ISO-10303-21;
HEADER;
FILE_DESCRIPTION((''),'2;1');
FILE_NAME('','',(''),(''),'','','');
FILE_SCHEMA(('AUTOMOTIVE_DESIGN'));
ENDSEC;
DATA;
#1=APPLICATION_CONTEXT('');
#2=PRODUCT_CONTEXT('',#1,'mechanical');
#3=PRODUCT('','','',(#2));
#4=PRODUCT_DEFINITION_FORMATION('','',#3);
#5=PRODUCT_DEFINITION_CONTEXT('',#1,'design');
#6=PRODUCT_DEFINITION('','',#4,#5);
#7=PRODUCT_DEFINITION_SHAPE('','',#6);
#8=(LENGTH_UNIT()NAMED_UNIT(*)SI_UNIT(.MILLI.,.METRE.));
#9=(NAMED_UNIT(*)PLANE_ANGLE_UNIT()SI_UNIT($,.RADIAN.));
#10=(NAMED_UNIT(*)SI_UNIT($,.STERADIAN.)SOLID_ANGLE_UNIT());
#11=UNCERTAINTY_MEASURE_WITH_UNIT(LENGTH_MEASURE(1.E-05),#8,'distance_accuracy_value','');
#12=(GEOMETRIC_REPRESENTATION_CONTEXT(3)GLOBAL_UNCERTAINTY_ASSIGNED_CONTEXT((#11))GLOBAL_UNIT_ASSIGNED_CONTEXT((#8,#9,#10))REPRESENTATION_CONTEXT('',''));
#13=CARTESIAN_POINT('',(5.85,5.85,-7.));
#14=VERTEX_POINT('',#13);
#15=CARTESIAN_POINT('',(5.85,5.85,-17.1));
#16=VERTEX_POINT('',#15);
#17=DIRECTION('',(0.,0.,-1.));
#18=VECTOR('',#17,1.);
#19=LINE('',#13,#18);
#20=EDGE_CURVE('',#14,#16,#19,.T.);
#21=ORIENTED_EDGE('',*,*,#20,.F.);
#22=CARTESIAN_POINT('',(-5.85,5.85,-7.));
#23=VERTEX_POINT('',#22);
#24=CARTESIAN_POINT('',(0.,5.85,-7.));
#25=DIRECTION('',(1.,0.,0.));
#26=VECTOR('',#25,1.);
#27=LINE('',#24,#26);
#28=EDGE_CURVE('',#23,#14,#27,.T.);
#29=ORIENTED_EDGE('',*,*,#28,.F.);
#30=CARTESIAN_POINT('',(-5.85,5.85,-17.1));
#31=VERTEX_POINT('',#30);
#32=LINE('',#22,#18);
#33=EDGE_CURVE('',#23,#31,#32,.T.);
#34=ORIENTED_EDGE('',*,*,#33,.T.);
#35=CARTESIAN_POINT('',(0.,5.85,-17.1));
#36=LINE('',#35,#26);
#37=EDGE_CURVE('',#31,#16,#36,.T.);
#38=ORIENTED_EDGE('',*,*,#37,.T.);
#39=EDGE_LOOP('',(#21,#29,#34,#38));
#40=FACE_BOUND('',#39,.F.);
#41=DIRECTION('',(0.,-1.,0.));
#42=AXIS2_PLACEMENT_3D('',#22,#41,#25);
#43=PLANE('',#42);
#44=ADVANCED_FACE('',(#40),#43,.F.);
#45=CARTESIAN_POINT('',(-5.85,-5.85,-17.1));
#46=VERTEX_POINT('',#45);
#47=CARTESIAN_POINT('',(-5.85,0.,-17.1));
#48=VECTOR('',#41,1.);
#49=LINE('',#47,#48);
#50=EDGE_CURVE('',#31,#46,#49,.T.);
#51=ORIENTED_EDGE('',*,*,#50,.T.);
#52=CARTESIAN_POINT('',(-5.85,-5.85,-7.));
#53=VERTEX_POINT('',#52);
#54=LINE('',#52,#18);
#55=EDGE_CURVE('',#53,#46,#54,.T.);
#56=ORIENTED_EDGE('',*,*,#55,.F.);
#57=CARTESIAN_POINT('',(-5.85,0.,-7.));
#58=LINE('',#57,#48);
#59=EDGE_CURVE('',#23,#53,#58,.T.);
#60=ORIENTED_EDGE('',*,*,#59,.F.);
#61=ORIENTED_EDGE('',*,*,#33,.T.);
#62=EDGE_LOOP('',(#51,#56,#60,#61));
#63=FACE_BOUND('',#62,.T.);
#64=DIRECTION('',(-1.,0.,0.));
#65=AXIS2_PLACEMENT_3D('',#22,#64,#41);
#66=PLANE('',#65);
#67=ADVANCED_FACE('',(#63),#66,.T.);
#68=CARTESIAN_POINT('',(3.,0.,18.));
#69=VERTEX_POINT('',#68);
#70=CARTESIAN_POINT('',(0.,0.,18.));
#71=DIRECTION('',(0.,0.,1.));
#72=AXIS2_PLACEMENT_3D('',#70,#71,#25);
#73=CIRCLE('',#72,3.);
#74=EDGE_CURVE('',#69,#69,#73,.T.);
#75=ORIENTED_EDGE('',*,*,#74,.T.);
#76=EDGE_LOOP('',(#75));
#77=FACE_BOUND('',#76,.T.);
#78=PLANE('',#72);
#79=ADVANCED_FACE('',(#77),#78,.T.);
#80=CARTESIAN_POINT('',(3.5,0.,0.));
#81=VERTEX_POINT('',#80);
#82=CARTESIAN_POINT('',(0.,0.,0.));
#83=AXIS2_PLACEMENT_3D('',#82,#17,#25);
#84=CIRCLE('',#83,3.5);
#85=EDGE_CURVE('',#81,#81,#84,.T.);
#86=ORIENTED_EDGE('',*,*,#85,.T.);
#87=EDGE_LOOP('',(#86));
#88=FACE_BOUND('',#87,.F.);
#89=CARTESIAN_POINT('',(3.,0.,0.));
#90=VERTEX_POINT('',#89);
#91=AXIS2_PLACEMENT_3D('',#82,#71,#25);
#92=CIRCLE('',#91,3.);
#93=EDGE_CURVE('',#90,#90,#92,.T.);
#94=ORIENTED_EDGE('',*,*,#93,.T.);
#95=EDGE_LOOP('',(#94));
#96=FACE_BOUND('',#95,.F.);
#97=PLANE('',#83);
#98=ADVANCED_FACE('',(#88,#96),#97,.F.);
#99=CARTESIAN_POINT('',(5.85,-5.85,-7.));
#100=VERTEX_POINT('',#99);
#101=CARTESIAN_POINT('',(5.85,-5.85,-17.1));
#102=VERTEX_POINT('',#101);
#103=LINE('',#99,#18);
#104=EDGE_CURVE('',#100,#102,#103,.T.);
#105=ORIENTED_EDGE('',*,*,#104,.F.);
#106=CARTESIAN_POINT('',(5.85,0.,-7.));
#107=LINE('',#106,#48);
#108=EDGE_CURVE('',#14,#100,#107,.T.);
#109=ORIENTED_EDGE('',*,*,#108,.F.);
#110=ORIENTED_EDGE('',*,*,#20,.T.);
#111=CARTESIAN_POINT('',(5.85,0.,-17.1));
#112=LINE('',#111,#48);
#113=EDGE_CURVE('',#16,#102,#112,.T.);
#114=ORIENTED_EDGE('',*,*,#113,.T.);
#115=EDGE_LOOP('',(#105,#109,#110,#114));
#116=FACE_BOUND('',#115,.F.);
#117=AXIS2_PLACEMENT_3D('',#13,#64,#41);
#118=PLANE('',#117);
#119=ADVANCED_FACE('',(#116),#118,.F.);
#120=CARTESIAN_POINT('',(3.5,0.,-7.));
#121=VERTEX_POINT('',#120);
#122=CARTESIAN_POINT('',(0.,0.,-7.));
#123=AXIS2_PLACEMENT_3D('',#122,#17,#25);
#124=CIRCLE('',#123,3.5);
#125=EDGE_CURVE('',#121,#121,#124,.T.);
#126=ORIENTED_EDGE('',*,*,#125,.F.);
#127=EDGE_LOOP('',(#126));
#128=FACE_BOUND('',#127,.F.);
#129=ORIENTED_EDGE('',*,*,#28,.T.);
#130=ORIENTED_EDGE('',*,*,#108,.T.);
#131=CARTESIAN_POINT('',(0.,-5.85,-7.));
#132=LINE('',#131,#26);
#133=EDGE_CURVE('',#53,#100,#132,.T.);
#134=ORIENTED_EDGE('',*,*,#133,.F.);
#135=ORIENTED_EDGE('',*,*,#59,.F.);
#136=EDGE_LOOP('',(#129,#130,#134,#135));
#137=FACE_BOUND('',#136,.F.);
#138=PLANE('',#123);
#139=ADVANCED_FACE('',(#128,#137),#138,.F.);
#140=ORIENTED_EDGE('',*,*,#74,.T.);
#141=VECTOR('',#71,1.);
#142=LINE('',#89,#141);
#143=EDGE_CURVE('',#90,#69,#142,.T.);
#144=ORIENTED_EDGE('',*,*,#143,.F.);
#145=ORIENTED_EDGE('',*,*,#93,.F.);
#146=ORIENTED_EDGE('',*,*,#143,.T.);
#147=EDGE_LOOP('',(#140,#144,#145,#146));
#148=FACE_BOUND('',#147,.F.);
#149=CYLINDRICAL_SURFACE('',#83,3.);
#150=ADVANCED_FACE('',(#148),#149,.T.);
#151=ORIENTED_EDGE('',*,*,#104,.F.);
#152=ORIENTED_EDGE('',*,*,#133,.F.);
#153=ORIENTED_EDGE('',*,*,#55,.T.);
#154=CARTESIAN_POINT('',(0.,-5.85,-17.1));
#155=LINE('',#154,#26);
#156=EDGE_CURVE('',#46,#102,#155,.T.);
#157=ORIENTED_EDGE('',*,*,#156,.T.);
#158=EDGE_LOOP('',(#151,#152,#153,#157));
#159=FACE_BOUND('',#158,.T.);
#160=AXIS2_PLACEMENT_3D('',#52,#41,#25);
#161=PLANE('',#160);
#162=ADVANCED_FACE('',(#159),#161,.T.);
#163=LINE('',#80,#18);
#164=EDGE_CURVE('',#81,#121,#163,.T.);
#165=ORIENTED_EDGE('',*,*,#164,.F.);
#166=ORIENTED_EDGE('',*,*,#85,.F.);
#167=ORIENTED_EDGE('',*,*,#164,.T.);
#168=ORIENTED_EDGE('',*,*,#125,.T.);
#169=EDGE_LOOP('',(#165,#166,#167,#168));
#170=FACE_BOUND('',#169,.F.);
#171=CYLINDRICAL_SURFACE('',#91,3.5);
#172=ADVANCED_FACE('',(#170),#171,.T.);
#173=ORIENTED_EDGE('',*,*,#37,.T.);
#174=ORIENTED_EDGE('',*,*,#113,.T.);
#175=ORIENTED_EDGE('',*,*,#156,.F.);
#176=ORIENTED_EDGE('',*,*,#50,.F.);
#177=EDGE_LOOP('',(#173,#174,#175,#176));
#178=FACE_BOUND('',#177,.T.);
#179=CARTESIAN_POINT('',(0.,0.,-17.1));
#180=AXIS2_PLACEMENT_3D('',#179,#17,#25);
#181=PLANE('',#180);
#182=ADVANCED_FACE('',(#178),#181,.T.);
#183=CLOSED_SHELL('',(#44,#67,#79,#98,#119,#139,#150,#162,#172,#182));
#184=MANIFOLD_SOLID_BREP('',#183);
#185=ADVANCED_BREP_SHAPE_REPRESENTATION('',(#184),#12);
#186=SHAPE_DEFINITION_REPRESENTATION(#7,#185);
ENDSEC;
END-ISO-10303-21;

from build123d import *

# Parameters (mm, degrees)
F0_R     = 3
F1_DEPTH = 18
F2_R     = 3.5
F2_R_2   = 3
F3_DEPTH = 7
F4_W     = 11.7
F4_H     = 11.7
F4_R     = 3.5
F5_DEPTH = 10.1


with BuildPart() as f1:
    # F0 (on Top) → F1 (new body)
    with BuildSketch(Plane.XY):
        Circle(F0_R)
    extrude(amount=F1_DEPTH)

    # F2 (on face) → F3 (join)
    with BuildSketch(Plane(origin=(0, 0, 0), x_dir=(1, 0, 0), z_dir=(0, 0, -1))):
        Circle(F2_R)
        Circle(F2_R_2, mode=Mode.SUBTRACT)
        Circle(F2_R_2)
    extrude(amount=F3_DEPTH)

    # F4 (on face) → F5 (join)
    with BuildSketch(Plane(origin=(0, 0, -7), x_dir=(1, 0, 0), z_dir=(0, 0, -1))):
        Rectangle(F4_W, F4_H)
        Circle(F4_R, mode=Mode.SUBTRACT)
        Circle(F4_R)
    extrude(amount=F5_DEPTH)


solid = f1.part
